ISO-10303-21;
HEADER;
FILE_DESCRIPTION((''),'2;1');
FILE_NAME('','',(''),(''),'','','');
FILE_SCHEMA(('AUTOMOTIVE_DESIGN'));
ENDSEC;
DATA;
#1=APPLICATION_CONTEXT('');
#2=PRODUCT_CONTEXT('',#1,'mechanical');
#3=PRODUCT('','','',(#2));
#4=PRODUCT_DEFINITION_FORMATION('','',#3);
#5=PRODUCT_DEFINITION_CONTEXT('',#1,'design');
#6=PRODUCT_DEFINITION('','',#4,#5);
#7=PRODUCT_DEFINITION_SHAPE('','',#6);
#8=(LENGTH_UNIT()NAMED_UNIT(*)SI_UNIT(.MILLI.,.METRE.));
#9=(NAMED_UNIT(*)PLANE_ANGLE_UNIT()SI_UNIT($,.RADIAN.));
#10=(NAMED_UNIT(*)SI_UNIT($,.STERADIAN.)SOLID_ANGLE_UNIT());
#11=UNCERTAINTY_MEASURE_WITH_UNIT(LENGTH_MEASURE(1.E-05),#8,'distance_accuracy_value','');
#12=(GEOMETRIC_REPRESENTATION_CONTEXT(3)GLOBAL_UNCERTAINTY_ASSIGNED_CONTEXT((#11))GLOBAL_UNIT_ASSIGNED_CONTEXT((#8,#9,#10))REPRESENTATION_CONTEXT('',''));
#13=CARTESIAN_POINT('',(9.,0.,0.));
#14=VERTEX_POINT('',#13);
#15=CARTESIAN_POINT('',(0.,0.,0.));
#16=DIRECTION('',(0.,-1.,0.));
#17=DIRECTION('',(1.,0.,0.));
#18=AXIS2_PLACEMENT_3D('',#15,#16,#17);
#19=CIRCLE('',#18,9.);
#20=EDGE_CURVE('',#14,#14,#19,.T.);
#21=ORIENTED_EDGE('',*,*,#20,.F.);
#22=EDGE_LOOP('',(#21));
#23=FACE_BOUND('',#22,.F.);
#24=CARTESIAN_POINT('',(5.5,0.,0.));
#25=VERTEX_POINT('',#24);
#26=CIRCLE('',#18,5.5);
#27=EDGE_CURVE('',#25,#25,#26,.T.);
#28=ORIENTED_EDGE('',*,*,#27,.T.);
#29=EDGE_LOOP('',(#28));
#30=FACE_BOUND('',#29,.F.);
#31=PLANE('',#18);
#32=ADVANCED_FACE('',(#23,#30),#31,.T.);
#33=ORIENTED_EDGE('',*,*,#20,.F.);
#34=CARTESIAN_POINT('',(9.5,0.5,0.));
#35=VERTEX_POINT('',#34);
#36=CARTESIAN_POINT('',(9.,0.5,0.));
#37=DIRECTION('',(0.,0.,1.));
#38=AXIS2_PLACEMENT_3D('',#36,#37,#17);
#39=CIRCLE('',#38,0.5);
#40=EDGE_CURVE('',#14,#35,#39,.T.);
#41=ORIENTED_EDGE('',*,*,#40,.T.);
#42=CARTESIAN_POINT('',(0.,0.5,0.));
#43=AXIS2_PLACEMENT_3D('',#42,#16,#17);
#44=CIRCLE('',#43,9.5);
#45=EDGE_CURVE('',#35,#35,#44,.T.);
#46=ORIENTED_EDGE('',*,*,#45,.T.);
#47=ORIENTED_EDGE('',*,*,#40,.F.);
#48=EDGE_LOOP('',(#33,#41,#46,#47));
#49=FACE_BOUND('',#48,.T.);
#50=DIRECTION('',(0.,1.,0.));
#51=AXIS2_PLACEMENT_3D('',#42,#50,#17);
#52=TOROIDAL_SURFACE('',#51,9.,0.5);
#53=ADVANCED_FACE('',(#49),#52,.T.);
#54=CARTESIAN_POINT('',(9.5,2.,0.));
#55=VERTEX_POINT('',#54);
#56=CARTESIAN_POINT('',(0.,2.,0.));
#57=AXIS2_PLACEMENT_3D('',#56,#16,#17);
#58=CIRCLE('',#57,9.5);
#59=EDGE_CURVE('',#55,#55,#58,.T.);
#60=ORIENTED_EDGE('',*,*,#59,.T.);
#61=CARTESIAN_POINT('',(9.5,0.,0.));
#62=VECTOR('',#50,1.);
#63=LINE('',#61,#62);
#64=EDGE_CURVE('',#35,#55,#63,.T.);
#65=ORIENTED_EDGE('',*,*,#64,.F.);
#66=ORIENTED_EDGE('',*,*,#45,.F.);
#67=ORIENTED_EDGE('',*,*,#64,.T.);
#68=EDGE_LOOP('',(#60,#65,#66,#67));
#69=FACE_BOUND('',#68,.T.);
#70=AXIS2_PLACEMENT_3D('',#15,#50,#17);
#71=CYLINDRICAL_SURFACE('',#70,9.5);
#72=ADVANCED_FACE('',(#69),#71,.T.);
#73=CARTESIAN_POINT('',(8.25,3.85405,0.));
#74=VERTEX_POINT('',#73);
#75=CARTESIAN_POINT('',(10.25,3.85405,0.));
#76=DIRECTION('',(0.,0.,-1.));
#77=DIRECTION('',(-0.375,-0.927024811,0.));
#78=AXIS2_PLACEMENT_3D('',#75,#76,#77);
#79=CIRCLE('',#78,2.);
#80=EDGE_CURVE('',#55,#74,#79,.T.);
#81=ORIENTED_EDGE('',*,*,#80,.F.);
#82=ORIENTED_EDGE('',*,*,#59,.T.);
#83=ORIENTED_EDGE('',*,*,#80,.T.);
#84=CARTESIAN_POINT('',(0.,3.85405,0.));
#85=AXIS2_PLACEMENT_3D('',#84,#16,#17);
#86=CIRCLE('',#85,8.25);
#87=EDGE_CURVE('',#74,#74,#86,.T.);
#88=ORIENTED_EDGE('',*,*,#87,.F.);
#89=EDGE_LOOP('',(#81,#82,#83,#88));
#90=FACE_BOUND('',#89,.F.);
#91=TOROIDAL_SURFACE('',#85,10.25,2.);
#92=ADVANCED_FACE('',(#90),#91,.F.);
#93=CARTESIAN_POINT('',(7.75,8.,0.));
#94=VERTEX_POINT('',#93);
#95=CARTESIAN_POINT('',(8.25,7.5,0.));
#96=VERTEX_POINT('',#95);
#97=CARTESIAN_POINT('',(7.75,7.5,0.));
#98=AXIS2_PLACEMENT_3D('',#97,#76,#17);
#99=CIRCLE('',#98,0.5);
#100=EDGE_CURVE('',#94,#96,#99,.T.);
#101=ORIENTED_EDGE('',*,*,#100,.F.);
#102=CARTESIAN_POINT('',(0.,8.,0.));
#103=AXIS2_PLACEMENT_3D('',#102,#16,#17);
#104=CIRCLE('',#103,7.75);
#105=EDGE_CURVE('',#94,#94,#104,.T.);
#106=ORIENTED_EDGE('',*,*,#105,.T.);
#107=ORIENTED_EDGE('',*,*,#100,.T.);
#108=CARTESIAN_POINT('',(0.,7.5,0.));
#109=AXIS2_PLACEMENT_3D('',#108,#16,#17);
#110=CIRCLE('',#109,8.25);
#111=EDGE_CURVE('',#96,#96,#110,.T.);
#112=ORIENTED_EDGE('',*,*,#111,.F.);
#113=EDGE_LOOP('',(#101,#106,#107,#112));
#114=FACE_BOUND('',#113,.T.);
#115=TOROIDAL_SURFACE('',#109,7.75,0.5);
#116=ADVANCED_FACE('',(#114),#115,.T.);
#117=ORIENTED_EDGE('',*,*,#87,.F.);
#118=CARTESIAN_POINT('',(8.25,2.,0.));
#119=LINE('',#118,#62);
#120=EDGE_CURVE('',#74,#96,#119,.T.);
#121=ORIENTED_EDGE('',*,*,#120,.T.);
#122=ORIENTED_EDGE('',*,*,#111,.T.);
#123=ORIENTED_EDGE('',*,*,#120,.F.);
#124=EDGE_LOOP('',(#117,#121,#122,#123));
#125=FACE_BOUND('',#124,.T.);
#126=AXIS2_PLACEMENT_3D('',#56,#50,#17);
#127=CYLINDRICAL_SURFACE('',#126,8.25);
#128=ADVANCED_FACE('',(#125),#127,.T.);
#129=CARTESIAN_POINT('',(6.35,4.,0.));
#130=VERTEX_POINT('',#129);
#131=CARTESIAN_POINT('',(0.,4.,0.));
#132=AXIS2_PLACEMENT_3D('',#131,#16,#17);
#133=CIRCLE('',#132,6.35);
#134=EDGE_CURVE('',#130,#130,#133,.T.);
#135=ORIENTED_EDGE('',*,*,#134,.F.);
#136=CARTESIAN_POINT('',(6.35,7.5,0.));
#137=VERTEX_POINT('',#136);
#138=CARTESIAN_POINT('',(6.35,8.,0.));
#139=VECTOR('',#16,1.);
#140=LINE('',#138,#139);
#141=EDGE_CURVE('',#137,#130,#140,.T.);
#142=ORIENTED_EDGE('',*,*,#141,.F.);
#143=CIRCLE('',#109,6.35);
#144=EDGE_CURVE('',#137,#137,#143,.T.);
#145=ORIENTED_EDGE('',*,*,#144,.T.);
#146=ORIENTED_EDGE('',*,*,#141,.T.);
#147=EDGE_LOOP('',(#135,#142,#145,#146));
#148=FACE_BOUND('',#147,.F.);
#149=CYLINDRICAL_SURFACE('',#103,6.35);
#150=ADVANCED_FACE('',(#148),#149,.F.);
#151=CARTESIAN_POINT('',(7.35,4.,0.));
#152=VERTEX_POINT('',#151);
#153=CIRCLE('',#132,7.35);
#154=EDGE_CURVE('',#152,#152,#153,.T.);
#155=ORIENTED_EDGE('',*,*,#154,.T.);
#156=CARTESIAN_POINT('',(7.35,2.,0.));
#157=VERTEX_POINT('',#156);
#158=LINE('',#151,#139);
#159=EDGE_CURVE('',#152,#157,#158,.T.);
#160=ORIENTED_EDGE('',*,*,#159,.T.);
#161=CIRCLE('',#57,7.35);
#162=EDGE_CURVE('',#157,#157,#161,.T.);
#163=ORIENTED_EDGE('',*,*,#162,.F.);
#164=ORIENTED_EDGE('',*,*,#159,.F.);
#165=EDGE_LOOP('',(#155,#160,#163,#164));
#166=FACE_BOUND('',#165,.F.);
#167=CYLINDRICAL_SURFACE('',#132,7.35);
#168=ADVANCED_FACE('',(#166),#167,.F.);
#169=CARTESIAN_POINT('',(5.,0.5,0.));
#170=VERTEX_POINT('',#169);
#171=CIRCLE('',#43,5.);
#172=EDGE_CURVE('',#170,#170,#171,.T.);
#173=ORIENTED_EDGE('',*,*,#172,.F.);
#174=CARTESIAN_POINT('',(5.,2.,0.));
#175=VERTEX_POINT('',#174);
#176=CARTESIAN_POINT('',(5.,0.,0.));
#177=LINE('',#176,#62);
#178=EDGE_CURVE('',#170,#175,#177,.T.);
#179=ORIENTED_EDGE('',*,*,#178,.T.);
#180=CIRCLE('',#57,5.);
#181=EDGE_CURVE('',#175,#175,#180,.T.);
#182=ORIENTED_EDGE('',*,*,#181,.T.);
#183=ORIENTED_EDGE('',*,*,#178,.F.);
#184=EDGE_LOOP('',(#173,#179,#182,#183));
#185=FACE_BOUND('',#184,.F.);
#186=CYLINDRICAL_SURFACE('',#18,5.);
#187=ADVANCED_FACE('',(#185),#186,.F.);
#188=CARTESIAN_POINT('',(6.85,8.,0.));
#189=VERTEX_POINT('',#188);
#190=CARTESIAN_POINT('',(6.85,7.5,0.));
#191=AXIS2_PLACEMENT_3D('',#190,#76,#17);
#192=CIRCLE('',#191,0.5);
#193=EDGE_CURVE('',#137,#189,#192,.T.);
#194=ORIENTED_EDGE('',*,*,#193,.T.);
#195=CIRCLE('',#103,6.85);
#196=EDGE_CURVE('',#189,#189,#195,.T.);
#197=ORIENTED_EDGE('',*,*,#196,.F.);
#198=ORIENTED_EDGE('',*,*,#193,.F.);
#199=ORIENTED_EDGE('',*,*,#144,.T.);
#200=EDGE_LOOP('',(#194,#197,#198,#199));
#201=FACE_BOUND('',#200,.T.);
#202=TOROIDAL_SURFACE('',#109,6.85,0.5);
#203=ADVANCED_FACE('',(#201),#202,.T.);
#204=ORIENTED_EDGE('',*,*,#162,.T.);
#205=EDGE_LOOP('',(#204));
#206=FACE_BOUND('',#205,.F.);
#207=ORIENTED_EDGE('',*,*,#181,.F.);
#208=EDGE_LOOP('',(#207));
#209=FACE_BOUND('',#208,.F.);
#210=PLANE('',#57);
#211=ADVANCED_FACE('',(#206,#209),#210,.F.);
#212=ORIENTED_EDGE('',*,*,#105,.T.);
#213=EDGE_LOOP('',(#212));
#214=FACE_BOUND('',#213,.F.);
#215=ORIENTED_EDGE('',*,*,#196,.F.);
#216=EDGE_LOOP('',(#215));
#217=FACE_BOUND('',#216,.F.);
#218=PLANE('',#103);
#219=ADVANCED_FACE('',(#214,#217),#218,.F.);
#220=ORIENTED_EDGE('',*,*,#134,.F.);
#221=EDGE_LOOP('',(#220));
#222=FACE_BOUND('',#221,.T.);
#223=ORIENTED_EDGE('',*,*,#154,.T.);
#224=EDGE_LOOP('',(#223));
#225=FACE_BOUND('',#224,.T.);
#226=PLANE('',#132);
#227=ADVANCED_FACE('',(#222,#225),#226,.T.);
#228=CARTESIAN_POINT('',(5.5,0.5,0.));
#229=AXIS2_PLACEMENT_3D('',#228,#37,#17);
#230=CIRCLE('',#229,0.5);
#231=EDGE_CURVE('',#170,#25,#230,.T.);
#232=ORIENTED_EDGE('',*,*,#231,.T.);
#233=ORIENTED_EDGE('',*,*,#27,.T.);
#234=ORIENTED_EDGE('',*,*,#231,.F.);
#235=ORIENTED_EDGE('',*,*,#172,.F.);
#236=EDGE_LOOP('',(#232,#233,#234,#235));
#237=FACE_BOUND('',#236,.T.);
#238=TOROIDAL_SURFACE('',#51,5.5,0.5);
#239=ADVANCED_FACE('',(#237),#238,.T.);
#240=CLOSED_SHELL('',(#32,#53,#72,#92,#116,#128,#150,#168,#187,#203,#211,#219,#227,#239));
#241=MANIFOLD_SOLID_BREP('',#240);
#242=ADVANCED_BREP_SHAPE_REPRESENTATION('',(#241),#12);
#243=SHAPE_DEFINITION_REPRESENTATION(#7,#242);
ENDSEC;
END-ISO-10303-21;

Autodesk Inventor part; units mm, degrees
ref_plane "YZ Plane" through (0, 0, 0) normal (1, 0, 0) x (0, 1, 0)
ref_plane "XZ Plane" through (0, 0, 0) normal (0, 1, 0) x (-1, 0, 0)
ref_plane "XY Plane" through (0, 0, 0) normal (0, 0, 1) x (1, 0, 0)
sketch "Sketch1" plane through (0, 0, 0) normal (0, 0, 1) x (1, 0, 0)
  line L0 (0, 10.7366) -> (0, -7.1166)
  line L1 (0, 0) -> (9.5, 0)
  line L2 (9.5, 0) -> (9.5, 2)
  line L3 (9.5, 2) -> (8.25, 2)
  line L4 (8.25, 2) -> (8.25, 8)
  line L5 (8.25, 8) -> (6.35, 8)
  line L6 (6.35, 8) -> (6.35, 2)
  line L7 (6.35, 2) -> (0, 2)
  dimension "d0" = 19
  dimension "d1" = 12.7
  dimension "d2" = 1.9
  dimension "d3" = 2
  dimension "d6" = 6
revolve "Revolution1" add sketch "Sketch1" angle 360 about axis through (0, 10.7366, 0) along (0, -1, 0)
sketch "Sketch2" plane through (0, 0, 0) normal (0, 0, 1) x (1, 0, 0)
  line L0 (6.1122, 2) -> (7.35, 2)
  line L1 (8.25, 8) -> (8.25, 2)
  line L2 (7.35, 4) -> (6.1122, 4)
  line L3 (6.1122, 4) -> (6.1122, 2)
  line L4 (8.25, 3) -> (8.25, 4)
  line L5 (-8.25, 8) -> (8.25, 8) projected
  line L6 (0, 5.3477) -> (0, 2.8187)
  line L7 (7.35, 4) -> (7.35, 2)
  point P0 (0, 0)
  dimension "d7" = 4
  dimension "d8" = 2
  dimension "d9" = 14.7
revolve "Revolution2" cut sketch "Sketch2" angle 360 about axis through (0, 5.3477, 0) along (0, -1, 0)
sketch "Sketch3" plane through (0, 0, 0) normal (0, -1, 0) x (1, 0, 0)
  circle A0 centre (0, 0) radius 5
  dimension "d11" = 10
extrude "Extrusion1" cut sketch "Sketch3" against normal up to surface (2 mm away)
fillet "Fillet1" radius 2 1 edges at (-8.25, 2, 0)
fillet "Fillet2" radius 0.5 2 edges at (-6.35, 8, 0) (-8.25, 8, 0)
fillet "Fillet3" radius 0.5 2 edges at (-9.5, 0, 0) (-5, 0, 0)
properties part number "çıkçıkkarşılıkk"
